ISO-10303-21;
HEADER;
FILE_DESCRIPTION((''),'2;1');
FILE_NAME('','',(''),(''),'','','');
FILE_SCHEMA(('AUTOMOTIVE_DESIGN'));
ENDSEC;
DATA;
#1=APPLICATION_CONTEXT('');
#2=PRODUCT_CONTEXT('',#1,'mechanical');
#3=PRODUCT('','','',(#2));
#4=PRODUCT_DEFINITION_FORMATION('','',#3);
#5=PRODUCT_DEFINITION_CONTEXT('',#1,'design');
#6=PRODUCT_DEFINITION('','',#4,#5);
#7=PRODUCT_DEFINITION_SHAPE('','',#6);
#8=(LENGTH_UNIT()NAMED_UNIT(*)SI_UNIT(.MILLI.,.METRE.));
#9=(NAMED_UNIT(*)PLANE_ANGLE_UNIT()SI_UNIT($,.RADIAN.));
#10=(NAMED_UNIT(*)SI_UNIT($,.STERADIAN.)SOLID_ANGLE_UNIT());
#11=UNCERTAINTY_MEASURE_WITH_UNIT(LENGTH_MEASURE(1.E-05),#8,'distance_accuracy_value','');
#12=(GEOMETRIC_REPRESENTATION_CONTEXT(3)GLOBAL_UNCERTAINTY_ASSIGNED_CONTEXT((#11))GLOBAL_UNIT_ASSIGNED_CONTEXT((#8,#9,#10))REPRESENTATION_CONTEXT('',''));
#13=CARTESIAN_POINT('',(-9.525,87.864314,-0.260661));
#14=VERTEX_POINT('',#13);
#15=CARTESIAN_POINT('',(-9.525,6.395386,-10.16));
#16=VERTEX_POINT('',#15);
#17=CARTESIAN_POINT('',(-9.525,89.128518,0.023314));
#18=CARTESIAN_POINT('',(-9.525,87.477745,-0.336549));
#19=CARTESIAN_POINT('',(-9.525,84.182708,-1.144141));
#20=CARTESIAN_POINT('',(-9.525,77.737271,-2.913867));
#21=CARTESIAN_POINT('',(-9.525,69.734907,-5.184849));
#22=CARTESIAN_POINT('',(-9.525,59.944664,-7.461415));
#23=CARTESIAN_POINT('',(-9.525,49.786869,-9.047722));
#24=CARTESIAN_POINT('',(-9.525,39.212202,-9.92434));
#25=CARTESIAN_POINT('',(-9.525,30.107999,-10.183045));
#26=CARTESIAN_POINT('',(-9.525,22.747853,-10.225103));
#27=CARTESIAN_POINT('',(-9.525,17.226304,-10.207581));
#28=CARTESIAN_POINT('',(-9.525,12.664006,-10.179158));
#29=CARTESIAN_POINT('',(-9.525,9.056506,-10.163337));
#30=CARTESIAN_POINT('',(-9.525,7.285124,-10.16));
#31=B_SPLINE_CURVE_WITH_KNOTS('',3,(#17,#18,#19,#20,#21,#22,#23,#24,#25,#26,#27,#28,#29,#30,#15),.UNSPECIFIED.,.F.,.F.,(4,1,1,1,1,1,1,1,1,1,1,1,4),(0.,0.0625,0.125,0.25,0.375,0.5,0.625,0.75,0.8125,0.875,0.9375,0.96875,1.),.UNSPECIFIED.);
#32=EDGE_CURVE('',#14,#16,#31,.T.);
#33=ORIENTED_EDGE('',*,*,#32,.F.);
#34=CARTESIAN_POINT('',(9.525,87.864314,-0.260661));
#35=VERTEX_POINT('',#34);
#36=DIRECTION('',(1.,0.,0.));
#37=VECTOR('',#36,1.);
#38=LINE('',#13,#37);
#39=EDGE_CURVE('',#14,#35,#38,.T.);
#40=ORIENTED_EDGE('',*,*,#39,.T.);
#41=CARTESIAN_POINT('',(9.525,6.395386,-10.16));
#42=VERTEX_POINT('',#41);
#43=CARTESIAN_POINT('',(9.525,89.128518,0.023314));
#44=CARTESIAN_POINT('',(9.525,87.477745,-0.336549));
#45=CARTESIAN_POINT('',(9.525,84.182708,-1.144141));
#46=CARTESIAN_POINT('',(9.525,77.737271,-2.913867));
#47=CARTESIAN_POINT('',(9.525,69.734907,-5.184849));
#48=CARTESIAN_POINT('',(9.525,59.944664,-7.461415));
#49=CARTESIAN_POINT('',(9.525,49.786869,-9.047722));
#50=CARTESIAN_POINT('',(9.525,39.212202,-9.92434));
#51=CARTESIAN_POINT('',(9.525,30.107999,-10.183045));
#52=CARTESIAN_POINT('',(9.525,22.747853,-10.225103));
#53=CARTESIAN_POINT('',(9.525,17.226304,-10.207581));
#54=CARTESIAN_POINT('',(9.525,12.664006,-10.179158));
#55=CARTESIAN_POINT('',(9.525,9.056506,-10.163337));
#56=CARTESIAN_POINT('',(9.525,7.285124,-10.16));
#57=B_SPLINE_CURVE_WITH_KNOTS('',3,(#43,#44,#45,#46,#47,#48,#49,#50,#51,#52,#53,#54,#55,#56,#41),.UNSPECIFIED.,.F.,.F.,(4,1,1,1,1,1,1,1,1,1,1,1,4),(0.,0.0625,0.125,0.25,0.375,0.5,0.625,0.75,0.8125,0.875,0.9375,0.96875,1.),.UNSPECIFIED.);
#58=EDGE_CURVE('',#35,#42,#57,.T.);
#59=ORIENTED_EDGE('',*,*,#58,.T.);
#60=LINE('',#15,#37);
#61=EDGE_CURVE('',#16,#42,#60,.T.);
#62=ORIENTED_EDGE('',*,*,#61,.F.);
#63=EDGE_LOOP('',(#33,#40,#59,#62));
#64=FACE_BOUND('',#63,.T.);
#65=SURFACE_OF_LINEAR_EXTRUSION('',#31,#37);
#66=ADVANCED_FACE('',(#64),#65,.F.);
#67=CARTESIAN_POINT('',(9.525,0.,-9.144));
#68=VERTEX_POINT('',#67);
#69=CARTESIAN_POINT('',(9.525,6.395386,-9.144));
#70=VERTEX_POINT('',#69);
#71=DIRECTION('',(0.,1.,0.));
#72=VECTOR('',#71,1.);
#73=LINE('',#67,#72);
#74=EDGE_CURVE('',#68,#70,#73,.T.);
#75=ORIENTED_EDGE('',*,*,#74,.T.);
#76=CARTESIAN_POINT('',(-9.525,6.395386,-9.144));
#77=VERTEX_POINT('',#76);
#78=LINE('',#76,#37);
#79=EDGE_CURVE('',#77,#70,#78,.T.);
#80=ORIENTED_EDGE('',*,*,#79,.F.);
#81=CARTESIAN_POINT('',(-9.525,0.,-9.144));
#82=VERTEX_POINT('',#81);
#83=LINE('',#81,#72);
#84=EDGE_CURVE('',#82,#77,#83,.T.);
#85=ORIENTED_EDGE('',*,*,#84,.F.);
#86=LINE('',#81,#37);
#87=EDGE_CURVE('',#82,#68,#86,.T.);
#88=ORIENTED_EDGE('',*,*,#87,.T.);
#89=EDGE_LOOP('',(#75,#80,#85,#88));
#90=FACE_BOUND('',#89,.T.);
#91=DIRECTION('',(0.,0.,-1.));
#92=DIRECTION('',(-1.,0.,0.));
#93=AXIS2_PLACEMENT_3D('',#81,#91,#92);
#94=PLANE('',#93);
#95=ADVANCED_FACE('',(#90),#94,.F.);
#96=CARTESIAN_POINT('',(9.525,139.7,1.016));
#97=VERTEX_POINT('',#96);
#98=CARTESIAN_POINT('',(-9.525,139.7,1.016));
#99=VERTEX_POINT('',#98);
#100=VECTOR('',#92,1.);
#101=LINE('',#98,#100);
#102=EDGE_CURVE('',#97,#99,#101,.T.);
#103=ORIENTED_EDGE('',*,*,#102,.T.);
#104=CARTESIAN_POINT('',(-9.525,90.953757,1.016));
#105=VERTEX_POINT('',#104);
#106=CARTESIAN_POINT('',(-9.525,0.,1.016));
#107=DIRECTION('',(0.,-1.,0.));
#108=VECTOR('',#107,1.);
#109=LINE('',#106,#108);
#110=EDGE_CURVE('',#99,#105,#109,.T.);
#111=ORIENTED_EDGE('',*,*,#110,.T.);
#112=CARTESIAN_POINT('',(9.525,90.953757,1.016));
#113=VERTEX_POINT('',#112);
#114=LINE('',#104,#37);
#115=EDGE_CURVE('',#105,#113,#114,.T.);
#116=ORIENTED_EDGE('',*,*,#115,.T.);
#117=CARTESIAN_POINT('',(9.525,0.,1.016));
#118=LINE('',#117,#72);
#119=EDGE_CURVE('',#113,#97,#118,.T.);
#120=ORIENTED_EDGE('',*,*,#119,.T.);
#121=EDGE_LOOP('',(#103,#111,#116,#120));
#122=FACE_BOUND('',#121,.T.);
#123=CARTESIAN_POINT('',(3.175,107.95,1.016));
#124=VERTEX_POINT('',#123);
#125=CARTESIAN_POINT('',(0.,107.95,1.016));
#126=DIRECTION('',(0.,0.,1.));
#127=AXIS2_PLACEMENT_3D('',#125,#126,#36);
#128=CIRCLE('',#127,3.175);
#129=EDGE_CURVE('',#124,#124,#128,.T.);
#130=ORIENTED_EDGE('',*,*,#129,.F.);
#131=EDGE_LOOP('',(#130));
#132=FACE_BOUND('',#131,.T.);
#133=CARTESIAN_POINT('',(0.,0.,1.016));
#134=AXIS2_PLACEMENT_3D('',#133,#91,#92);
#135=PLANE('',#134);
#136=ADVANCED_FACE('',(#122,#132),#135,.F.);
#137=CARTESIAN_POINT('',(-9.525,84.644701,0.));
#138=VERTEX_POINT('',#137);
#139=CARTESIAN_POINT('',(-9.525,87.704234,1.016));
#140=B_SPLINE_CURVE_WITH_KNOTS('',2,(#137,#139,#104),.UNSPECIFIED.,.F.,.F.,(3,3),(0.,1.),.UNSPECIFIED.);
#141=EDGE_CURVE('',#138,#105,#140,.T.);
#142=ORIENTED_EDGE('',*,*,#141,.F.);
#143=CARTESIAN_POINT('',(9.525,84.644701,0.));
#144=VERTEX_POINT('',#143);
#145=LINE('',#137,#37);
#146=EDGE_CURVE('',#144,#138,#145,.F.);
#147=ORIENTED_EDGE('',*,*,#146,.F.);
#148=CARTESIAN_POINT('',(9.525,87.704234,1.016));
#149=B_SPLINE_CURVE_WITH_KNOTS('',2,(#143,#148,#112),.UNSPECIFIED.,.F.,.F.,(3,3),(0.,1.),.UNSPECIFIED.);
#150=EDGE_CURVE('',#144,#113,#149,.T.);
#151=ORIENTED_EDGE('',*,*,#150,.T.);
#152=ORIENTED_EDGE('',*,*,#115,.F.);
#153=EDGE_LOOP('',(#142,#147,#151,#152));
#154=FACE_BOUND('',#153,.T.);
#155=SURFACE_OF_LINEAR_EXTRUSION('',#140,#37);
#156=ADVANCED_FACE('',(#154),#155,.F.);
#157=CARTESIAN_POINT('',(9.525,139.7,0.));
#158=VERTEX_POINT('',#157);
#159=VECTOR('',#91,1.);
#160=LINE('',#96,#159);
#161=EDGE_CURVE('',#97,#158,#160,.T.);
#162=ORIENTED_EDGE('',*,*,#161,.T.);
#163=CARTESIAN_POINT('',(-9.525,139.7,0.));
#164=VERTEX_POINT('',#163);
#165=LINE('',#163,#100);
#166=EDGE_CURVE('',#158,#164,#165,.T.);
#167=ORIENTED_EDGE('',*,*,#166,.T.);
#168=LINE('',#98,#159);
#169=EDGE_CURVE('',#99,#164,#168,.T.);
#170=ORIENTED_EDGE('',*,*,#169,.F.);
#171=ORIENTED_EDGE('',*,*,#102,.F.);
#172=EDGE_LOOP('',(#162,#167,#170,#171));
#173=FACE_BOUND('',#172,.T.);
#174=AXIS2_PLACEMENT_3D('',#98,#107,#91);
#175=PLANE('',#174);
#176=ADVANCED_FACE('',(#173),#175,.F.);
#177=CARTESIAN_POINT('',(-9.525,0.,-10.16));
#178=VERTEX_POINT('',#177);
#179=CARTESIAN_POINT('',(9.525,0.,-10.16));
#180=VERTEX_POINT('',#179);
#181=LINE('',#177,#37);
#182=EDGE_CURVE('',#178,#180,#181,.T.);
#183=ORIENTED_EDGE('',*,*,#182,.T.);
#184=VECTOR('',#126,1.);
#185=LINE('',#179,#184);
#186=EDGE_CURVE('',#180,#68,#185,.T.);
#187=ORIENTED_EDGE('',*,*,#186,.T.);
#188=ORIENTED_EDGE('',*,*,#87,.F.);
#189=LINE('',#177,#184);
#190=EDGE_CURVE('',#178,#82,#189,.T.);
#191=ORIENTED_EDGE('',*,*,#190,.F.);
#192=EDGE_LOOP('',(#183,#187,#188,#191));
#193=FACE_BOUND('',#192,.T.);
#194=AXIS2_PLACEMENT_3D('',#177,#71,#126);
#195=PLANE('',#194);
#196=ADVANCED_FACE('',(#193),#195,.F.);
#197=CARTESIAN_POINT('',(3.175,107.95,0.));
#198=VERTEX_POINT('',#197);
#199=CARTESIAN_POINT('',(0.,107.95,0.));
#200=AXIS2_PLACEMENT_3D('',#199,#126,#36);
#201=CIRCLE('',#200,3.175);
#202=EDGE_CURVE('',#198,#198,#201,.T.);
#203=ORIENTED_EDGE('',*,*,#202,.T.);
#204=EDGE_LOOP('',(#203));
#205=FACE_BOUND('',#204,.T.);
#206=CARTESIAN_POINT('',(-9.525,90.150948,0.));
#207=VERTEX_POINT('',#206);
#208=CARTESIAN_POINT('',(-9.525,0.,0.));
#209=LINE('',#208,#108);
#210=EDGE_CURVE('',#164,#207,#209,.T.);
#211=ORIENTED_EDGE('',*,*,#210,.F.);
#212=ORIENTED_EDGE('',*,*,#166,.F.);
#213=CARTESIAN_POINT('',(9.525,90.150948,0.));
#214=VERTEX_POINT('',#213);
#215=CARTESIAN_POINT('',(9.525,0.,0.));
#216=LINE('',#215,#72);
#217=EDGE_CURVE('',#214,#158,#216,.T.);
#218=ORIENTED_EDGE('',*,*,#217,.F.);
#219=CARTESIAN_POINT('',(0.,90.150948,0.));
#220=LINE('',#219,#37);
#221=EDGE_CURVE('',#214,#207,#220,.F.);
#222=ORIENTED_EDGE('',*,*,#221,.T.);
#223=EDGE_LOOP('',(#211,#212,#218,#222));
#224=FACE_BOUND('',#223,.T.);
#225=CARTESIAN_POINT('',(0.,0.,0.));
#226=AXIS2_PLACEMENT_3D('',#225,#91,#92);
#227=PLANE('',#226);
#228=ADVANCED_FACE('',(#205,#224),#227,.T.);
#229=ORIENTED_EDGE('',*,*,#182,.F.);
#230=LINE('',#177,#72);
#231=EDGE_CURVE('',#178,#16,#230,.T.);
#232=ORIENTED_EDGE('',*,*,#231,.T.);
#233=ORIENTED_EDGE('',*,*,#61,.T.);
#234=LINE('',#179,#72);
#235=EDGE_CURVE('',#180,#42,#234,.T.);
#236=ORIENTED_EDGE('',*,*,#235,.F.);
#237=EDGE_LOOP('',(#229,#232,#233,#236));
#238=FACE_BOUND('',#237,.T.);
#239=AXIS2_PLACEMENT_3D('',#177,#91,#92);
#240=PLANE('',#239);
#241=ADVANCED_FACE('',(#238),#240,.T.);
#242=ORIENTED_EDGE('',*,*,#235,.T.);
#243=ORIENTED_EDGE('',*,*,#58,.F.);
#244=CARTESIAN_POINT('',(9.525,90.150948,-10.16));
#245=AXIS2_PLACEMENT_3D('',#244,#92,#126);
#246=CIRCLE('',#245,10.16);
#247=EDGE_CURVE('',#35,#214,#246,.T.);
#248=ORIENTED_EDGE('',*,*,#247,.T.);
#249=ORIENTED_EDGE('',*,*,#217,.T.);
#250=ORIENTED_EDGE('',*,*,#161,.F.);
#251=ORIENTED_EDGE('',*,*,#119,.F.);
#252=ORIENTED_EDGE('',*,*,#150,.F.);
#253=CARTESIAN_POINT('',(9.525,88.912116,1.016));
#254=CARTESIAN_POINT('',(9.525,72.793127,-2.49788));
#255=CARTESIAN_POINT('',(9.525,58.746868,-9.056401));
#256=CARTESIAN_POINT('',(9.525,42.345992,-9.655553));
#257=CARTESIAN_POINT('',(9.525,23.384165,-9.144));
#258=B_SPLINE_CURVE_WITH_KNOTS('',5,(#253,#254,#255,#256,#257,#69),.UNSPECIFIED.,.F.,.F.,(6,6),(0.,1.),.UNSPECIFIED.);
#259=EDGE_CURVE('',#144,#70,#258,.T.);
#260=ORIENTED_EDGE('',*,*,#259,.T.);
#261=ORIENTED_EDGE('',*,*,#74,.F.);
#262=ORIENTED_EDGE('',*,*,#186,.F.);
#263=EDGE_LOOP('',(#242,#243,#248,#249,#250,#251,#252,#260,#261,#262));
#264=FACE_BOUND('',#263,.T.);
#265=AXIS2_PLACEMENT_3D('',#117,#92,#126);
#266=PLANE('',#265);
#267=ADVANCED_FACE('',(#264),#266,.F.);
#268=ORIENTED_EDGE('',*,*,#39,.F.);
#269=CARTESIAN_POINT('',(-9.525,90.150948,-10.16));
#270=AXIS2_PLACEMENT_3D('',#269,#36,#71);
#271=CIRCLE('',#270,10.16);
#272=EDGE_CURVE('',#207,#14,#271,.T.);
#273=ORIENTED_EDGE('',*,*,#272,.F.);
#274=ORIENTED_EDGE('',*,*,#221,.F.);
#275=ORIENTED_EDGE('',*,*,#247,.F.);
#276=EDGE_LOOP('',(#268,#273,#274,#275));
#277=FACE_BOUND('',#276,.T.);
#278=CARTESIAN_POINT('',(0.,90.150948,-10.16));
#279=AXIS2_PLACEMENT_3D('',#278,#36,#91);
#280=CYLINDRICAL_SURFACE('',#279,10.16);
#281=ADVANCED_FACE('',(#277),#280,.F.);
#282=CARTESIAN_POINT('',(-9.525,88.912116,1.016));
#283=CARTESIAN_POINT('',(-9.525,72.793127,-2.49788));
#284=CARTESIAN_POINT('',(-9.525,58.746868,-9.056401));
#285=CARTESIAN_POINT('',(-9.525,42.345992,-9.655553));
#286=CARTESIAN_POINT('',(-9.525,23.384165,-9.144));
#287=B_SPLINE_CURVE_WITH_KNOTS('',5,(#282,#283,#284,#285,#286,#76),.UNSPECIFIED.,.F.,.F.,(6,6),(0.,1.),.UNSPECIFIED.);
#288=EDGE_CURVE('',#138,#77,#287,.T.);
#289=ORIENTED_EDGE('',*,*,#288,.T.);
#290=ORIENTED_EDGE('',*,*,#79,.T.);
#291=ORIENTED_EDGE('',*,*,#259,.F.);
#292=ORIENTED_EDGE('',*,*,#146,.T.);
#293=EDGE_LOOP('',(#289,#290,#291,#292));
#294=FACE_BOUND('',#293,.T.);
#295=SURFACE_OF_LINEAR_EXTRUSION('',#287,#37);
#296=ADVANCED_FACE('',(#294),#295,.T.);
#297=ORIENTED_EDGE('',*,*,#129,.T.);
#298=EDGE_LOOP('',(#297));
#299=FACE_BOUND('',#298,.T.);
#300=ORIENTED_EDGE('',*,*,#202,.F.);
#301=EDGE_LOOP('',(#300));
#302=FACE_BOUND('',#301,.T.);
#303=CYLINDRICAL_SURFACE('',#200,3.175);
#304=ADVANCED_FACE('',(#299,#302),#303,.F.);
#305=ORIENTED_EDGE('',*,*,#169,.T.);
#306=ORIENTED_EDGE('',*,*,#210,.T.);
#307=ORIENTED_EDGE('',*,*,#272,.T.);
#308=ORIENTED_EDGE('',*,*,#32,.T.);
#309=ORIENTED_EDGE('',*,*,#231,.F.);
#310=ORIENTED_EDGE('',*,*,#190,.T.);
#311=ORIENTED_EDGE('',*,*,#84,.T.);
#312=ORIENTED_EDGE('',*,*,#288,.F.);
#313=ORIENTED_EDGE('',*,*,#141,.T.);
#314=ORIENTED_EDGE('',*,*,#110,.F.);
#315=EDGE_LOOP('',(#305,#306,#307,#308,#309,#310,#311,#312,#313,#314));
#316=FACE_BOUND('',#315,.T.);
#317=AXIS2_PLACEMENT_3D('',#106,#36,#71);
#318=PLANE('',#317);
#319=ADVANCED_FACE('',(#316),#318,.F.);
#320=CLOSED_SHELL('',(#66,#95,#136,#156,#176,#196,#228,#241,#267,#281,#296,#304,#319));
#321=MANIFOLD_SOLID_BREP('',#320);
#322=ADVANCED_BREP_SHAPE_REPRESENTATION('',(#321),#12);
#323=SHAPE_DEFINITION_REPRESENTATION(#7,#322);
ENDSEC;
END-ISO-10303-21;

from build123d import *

# Parameters (mm, degrees)
SKETCH1_W           = 19.05
SKETCH1_H           = 139.7
BOSS_EXTRUDE1_DEPTH = 1.016
SKETCH2_R           = 3.175
CUT_EXTRUDE1_DEPTH  = 141.028025341
BOSS_EXTRUDE2_START = -19.05
BOSS_EXTRUDE2_DEPTH = 19.05
CUT_EXTRUDE2_DEPTH  = 142.362614158
FILLET1_R           = 10.16


# Read off the part's stored shape, not the designer's step: Boss-Extrude2
with BuildPart() as part:
    # Sketch1 → Boss-Extrude1 (new body)
    with BuildSketch(Plane.XY):
        with Locations((0, 69.85)):
            Rectangle(SKETCH1_W, SKETCH1_H)
    extrude(amount=BOSS_EXTRUDE1_DEPTH)

    # Sketch2 → Cut-Extrude1 (cut, through all)
    with BuildSketch(Plane.XY.offset(1.016)):
        with Locations((0, 107.95)):
            Circle(SKETCH2_R)
    extrude(amount=-CUT_EXTRUDE1_DEPTH, mode=Mode.SUBTRACT)

    # Boss-Extrude2 outline → Boss-Extrude2 (add)
    with BuildSketch(Plane(origin=(9.525, 0, 0), x_dir=(0, 0, -1), z_dir=(1, 0, 0)).offset(BOSS_EXTRUDE2_START)):
        with BuildLine():
            add(Edge.make_bspline(
                [(-1e-08, 89.021856582), (0.353951992, 87.40678329), (1.153670007, 84.14800116), (2.913866895, 77.737270865), (5.184849484, 69.73490743), (7.461415384, 59.944664253), (9.047721746, 49.78686922), (9.924339704, 39.212202023), (10.183044993, 30.10799928), (10.225102879, 22.747853486), (10.207581307, 17.22630398), (10.179157942, 12.664005658), (10.163337481, 9.05650551), (10.16, 7.285124222), (10.16, 6.395385599)],
                knots=[0.00134616, 0.00134616, 0.00134616, 0.00134616, 0.0625, 0.125, 0.25, 0.375, 0.5, 0.625, 0.75, 0.8125, 0.875, 0.9375, 0.96875, 1, 1, 1, 1], degree=3))
            Line((-1e-08, 89.021856582), (0, 84.644701296))
            add(Edge.make_bspline(
                [(0, 84.644701296), (3.804384443, 69.740616889), (9.143429465, 56.08795928), (9.602178505, 40.318745924), (9.144, 22.473473321), (9.144, 6.395385599)],
                knots=[0.053605471, 0.053605471, 0.053605471, 0.053605471, 0.053605471, 0.053605471, 1, 1, 1, 1, 1, 1], degree=5))
            Line((9.144, 6.395385599), (9.144, 0))
            Line((9.144, 0), (10.16, 0))
            Line((10.16, 0), (10.16, 6.395385599))
        make_face()
    extrude(amount=BOSS_EXTRUDE2_DEPTH)

    # Sketch4 → Cut-Extrude2 (cut, through all)
    with BuildSketch(Plane(origin=(9.525, 0, 0), x_dir=(0, 0, -1), z_dir=(1, 0, 0))):
        with BuildLine():
            Line((-1.016, 90.953756608), (-1.016, 0))
            Line((-1.016, 0), (0, 0))
            Line((0, 0), (0, 84.644701296))
            add(Edge.make_bspline(
                [(0, 84.644701296), (-1.016, 87.704234075), (-1.016, 90.953756608)],
                knots=[0, 0, 0, 1, 1, 1], degree=2))
        make_face()
    extrude(amount=-CUT_EXTRUDE2_DEPTH, mode=Mode.SUBTRACT)

    # Fillet1
    fillet1_edges = [part.edges().sort_by_distance(p)[0] for p in [
        (0, 89.021856582, 1e-08),
    ]]
    fillet(fillet1_edges, radius=FILLET1_R)


solid = part.part
